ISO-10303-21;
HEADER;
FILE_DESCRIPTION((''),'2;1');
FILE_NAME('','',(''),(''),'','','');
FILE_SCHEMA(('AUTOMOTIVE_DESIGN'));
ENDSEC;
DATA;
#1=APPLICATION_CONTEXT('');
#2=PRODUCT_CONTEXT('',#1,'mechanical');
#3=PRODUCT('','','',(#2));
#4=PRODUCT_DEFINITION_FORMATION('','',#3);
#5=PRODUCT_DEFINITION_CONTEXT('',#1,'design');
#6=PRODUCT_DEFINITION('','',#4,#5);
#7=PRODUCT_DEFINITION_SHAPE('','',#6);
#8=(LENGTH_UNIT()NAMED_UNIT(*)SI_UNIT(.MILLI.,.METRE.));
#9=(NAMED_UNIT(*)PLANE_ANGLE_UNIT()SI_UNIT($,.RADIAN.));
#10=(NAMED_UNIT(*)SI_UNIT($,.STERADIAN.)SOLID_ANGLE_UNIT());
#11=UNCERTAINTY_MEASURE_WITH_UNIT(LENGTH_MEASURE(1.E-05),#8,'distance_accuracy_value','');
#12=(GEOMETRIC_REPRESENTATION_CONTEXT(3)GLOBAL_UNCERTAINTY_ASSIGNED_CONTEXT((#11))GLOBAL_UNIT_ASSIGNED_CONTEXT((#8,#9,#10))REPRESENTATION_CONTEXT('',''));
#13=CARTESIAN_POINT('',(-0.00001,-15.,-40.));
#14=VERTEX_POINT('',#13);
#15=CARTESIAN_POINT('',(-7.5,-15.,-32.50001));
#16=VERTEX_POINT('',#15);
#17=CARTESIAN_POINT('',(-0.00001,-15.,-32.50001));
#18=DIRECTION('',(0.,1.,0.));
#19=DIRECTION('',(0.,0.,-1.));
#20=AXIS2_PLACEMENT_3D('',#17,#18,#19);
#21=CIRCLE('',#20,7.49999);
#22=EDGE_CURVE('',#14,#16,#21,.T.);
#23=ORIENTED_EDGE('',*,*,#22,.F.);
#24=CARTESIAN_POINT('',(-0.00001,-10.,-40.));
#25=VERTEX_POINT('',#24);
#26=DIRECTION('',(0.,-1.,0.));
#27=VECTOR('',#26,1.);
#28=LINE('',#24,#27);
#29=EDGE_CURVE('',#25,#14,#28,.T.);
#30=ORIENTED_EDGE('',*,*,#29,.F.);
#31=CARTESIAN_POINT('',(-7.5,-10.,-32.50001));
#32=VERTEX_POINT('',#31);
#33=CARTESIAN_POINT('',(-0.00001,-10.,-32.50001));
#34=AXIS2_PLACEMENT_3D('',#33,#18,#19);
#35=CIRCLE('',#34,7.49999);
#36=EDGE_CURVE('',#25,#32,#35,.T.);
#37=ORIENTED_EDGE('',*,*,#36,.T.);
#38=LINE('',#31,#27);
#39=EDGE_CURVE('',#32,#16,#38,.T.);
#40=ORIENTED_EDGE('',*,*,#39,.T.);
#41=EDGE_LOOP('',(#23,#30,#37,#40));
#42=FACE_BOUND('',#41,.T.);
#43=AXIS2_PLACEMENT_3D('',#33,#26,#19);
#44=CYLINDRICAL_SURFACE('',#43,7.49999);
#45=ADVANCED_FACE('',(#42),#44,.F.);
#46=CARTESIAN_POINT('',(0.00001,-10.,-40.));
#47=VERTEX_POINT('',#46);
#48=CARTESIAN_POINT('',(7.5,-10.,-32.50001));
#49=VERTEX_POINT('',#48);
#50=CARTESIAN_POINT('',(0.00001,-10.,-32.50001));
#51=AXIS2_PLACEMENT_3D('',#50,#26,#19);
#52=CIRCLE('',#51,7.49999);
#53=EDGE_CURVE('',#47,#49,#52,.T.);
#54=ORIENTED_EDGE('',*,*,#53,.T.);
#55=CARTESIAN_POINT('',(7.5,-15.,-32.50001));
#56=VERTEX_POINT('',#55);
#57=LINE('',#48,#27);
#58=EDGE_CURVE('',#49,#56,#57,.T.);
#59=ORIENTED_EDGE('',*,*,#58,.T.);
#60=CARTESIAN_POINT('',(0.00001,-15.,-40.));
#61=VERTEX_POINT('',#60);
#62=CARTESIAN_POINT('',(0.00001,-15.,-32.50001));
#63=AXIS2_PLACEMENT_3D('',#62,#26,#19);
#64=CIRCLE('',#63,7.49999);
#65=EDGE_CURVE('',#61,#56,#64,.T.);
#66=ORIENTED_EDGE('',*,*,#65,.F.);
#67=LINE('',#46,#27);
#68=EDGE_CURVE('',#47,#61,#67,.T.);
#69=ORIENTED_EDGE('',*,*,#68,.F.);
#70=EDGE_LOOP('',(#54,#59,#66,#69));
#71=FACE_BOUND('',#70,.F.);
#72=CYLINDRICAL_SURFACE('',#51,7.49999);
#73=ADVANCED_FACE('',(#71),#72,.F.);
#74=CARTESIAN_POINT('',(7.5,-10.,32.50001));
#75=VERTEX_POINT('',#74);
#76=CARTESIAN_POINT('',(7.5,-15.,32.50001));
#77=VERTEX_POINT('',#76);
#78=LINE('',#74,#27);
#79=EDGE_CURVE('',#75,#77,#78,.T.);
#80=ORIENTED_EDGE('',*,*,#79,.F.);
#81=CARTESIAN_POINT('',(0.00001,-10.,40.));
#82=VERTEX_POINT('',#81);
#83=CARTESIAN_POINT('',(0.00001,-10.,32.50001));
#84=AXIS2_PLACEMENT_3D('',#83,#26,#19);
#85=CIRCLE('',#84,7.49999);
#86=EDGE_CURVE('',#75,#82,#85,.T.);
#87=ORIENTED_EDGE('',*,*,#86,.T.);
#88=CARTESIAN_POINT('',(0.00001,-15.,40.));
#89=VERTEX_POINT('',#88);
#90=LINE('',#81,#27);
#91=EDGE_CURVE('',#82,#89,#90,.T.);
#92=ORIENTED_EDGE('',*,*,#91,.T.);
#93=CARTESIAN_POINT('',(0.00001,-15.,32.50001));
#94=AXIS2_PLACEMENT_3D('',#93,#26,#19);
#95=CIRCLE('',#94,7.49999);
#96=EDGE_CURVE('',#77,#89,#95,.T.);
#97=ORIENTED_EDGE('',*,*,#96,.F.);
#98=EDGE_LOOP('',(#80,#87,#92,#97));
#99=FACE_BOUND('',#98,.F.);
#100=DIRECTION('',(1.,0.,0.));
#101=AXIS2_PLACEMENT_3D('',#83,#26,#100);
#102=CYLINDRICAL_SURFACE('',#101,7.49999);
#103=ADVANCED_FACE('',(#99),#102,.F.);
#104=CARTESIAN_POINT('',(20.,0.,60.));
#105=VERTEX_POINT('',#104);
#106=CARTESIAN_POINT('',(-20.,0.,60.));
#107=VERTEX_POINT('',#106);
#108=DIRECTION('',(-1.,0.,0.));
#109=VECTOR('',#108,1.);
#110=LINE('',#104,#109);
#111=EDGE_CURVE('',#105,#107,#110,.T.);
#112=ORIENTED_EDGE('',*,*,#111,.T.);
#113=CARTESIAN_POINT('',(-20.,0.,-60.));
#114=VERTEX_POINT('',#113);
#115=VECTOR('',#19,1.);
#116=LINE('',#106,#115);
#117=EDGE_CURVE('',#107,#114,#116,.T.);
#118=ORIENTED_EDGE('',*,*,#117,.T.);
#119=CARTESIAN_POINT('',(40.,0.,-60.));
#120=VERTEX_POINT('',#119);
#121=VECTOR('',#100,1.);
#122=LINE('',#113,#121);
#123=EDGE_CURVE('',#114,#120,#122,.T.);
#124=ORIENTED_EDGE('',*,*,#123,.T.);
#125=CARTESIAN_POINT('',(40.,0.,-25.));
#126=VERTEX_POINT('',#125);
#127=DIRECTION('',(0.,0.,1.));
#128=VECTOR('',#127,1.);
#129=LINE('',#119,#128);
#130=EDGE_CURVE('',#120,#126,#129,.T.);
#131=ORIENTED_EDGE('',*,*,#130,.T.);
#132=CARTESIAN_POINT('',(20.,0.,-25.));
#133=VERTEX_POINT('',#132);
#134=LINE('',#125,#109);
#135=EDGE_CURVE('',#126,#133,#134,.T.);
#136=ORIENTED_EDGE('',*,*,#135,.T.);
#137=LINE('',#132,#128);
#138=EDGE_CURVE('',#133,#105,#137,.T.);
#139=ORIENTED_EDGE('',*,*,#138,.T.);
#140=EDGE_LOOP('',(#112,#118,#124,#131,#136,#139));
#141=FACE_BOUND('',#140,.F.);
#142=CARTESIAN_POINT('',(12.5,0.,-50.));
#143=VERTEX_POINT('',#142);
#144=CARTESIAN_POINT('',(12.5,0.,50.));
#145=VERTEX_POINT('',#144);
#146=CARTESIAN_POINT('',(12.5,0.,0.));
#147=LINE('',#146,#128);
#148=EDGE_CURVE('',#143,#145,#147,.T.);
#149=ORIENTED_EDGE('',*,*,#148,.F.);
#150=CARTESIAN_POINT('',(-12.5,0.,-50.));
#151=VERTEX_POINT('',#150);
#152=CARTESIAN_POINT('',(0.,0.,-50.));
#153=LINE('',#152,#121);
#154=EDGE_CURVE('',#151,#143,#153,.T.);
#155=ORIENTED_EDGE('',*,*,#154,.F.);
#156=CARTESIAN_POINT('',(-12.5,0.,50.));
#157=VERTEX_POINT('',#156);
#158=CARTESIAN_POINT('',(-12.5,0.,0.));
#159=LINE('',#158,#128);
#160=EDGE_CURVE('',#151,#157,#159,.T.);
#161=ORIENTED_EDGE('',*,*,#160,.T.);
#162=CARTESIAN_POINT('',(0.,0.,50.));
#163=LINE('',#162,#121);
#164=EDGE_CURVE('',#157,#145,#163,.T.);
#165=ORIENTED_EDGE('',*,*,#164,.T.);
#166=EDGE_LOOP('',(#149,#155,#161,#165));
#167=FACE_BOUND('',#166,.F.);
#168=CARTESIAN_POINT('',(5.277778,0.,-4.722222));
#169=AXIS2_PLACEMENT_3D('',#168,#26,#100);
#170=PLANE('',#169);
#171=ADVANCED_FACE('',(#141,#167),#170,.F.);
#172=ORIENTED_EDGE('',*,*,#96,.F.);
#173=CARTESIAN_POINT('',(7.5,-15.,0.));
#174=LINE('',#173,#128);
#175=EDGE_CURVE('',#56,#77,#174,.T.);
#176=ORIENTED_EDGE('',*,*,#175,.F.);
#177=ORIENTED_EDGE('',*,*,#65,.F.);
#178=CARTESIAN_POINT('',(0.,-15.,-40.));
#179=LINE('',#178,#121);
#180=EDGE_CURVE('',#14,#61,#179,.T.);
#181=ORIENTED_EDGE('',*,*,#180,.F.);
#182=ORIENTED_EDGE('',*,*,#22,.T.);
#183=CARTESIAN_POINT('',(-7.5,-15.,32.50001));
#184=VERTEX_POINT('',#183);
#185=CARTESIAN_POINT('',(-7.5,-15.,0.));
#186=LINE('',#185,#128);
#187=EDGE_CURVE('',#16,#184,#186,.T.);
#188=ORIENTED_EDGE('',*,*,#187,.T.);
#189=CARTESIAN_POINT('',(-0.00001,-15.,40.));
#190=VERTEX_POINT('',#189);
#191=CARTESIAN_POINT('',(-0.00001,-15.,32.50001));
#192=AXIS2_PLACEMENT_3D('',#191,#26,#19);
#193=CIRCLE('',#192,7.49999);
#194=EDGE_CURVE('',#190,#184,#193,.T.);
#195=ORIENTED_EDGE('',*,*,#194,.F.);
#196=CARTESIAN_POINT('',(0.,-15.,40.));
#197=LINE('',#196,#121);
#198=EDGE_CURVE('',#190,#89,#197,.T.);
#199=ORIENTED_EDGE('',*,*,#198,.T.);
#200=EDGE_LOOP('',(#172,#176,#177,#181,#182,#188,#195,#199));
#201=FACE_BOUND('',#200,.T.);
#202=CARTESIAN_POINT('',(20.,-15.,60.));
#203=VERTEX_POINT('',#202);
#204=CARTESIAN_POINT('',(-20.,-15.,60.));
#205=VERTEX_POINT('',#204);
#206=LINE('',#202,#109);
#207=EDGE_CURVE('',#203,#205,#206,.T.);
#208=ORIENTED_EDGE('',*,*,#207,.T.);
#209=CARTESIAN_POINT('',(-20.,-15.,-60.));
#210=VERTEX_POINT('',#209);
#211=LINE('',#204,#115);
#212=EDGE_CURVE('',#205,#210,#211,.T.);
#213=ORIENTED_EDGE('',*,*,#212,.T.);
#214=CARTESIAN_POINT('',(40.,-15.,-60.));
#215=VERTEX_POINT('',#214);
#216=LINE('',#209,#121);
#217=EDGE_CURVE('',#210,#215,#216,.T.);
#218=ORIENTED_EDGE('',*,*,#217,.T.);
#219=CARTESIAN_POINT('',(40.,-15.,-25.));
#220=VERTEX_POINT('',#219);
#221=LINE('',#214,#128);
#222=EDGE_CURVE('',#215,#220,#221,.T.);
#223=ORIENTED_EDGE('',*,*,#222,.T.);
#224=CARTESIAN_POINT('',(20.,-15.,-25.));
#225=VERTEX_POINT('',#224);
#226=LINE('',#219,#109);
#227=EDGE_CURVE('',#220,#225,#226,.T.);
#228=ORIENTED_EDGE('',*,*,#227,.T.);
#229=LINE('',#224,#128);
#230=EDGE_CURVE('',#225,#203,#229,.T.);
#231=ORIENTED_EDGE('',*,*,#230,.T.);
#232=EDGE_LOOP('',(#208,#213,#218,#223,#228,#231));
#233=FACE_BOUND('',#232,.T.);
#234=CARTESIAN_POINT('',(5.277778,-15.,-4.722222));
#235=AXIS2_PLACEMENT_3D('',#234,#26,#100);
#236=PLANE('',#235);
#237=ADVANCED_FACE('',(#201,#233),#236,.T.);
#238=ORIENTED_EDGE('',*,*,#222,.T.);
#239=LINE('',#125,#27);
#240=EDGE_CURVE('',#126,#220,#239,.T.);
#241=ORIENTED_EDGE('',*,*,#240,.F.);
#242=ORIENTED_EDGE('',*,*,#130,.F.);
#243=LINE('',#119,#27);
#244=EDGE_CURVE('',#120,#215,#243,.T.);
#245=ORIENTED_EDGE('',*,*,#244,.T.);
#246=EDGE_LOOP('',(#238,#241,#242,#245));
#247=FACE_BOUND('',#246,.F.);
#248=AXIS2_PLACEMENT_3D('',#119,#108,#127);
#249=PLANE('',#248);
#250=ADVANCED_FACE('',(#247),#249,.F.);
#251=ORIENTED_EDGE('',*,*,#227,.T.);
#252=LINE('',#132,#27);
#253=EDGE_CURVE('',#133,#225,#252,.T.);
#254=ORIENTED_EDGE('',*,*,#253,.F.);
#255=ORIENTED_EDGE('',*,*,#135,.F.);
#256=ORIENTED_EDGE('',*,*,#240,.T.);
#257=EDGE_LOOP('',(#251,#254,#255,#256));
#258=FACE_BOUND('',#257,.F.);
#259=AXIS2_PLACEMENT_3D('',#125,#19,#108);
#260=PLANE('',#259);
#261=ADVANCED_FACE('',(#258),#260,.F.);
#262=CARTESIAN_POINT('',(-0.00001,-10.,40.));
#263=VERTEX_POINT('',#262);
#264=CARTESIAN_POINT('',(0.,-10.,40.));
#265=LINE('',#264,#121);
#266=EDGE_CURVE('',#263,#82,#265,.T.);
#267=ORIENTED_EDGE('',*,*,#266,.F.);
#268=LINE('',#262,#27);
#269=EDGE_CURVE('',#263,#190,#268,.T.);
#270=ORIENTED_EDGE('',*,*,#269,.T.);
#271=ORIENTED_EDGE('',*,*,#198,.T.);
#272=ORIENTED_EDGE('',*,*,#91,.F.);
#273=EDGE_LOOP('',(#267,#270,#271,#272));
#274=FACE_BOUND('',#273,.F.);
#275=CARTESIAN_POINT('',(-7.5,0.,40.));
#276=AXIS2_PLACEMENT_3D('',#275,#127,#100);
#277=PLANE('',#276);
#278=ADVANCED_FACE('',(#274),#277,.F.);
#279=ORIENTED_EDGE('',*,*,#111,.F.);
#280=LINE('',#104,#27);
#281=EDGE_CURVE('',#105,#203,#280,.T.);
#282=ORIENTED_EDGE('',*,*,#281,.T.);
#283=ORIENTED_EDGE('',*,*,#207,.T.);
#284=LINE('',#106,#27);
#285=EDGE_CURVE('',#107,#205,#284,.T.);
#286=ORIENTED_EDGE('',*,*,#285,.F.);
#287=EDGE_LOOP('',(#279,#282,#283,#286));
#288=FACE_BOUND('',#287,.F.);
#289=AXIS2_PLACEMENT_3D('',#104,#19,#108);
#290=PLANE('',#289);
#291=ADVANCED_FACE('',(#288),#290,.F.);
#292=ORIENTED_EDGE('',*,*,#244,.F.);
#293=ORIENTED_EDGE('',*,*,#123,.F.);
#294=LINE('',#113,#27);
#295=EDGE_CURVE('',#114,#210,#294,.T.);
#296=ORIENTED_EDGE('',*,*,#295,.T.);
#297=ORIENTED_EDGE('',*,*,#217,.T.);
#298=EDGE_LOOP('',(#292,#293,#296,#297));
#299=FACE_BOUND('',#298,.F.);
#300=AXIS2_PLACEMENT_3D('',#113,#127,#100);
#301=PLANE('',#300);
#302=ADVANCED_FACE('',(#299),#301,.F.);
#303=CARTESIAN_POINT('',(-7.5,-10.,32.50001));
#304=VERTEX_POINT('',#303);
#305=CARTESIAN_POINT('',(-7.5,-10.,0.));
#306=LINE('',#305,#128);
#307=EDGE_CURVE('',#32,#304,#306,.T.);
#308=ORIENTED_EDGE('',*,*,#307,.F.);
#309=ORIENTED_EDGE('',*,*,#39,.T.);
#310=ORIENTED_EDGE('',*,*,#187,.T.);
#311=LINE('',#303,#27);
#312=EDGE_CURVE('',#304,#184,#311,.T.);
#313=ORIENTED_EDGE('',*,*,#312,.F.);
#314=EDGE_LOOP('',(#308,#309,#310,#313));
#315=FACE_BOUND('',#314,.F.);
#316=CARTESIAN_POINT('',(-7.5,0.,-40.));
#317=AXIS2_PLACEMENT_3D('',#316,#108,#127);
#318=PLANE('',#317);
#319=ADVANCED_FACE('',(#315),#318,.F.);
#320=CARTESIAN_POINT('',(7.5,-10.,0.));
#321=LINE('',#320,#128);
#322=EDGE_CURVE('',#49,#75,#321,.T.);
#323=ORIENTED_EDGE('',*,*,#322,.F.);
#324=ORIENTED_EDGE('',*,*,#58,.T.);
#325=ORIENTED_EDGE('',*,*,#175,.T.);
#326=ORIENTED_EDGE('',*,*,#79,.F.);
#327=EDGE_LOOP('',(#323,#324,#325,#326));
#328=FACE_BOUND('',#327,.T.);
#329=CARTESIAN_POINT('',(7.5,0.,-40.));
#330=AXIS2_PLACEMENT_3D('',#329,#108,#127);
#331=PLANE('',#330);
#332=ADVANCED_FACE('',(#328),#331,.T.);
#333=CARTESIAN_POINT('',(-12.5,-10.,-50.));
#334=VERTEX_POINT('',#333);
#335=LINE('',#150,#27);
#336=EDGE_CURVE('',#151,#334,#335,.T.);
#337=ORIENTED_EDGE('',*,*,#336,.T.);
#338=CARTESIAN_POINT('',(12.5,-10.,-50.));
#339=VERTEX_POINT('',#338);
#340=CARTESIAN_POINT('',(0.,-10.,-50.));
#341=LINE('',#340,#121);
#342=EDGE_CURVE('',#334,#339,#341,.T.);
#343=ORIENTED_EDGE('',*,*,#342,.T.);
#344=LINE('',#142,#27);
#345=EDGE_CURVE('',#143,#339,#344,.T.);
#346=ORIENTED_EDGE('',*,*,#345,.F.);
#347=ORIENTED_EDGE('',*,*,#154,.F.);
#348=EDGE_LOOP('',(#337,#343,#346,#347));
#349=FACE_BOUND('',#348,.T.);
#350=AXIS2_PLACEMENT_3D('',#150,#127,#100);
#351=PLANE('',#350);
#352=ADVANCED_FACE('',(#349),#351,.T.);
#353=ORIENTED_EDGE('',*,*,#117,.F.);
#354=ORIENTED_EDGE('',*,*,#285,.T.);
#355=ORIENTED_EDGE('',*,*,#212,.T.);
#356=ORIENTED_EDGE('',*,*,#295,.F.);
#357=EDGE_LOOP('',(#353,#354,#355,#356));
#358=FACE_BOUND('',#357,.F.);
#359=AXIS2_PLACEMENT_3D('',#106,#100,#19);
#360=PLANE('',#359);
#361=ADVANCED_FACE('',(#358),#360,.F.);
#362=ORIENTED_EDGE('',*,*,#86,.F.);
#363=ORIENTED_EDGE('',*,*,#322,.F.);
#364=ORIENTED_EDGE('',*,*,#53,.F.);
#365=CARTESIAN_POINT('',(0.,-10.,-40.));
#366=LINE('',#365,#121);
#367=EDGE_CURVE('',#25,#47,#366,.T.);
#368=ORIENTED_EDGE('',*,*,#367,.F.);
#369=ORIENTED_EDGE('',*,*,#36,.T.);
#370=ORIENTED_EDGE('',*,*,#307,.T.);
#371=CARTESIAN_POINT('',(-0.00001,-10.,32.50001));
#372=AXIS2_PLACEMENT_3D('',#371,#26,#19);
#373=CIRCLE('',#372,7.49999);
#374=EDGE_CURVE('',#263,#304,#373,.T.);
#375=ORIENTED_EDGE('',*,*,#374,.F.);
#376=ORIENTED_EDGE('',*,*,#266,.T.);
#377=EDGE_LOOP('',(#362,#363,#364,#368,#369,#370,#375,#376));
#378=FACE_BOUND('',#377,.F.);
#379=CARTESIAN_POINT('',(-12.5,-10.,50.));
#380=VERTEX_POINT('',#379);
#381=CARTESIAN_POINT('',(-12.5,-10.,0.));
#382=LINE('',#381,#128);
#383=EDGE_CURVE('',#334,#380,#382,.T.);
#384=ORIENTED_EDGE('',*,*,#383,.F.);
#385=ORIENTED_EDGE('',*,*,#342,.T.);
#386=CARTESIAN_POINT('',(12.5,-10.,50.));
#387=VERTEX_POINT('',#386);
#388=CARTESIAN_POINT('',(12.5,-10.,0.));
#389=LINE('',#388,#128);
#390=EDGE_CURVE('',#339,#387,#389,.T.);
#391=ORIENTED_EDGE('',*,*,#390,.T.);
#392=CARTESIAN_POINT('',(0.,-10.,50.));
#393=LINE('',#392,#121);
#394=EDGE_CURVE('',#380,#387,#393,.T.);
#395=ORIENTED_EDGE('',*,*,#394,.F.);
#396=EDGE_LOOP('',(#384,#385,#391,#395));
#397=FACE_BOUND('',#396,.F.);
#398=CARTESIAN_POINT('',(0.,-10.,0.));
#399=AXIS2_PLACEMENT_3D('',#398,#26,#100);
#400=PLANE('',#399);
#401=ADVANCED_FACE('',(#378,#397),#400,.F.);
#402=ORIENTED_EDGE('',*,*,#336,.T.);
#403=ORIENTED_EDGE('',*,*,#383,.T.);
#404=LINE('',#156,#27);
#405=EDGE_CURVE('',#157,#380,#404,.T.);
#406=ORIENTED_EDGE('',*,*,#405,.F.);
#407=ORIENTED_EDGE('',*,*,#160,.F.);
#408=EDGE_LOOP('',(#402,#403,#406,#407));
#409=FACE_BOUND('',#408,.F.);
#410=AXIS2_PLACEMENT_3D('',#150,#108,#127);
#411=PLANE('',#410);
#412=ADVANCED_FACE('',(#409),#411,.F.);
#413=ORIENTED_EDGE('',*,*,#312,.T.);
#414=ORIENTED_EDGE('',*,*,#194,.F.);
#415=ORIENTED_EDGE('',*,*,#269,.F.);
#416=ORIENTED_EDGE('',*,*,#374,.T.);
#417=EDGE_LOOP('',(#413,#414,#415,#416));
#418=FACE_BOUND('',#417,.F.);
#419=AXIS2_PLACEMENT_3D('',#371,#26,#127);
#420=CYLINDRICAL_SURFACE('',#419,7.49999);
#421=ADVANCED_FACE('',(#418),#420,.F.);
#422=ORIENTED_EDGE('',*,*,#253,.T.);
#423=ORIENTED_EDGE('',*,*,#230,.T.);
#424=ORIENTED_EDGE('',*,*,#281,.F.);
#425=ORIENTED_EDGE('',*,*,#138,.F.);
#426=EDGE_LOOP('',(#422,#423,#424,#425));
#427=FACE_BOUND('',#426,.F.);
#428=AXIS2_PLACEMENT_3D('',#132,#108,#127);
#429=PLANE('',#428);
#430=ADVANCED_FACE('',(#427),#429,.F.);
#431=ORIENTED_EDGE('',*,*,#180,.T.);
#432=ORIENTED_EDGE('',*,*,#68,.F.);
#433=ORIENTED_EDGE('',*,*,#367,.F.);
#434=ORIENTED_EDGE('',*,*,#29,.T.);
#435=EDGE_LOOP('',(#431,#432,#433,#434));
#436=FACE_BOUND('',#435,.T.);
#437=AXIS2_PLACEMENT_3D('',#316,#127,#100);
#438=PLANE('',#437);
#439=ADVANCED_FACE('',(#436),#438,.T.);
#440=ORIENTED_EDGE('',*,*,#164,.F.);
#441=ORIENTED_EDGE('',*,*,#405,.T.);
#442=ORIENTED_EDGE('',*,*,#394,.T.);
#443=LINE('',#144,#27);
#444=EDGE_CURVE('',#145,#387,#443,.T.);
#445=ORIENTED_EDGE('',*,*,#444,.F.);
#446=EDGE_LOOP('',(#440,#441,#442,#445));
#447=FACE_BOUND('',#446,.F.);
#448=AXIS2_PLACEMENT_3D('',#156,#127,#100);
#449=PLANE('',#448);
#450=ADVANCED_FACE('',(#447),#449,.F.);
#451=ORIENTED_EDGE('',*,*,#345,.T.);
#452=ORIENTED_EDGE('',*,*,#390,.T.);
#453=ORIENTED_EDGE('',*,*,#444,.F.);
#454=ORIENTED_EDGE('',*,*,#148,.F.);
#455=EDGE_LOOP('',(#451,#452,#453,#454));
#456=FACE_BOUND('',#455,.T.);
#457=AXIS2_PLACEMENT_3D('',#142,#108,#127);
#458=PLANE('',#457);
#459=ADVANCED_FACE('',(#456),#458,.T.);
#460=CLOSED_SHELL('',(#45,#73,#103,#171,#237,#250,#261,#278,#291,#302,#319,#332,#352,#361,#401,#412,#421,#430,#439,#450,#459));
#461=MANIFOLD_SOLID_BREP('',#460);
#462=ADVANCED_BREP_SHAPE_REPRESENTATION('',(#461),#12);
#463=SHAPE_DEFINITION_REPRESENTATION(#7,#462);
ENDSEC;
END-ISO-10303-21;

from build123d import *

# Parameters (mm, degrees)
F0_W     = 25
F0_H     = 100
F0_W_2   = 15
F0_H_2   = 80
F1_DEPTH = 15
F2_DEPTH = 10
F3_R     = 7.49999


# Not quite as in the source:
# - a fillet or chamfer is up to 0.001 mm smaller than in the source, because OpenCascade refuses the exact size


with BuildPart() as f1:
    # F0 (on Front) → F1 (new body)
    with BuildSketch(Plane.XZ):
        Polygon((20, -25), (20, 60), (-20, 60), (-20, -60), (40, -60), (40, -25), align=None)
        Rectangle(F0_W, F0_H, mode=Mode.SUBTRACT)
        Rectangle(F0_W, F0_H)
        Rectangle(F0_W_2, F0_H_2, mode=Mode.SUBTRACT)
    extrude(amount=F1_DEPTH)

    # F0 (on Front) → F2 (cut)
    with BuildSketch(Plane.XZ):
        Rectangle(F0_W, F0_H)
        Rectangle(F0_W_2, F0_H_2, mode=Mode.SUBTRACT)
    extrude(amount=F2_DEPTH, mode=Mode.SUBTRACT)

    # F3 (radius 7.5 in the source; OpenCascade refuses exactly that, so slightly less here)
    f3_edges = [f1.edges().sort_by_distance(p)[0] for p in [
        (7.5, -12.5, 40),
        (-7.5, -12.5, 40),
        (-7.5, -12.5, -40),
        (7.5, -12.5, -40),
    ]]
    fillet(f3_edges, radius=F3_R)


solid = f1.part
